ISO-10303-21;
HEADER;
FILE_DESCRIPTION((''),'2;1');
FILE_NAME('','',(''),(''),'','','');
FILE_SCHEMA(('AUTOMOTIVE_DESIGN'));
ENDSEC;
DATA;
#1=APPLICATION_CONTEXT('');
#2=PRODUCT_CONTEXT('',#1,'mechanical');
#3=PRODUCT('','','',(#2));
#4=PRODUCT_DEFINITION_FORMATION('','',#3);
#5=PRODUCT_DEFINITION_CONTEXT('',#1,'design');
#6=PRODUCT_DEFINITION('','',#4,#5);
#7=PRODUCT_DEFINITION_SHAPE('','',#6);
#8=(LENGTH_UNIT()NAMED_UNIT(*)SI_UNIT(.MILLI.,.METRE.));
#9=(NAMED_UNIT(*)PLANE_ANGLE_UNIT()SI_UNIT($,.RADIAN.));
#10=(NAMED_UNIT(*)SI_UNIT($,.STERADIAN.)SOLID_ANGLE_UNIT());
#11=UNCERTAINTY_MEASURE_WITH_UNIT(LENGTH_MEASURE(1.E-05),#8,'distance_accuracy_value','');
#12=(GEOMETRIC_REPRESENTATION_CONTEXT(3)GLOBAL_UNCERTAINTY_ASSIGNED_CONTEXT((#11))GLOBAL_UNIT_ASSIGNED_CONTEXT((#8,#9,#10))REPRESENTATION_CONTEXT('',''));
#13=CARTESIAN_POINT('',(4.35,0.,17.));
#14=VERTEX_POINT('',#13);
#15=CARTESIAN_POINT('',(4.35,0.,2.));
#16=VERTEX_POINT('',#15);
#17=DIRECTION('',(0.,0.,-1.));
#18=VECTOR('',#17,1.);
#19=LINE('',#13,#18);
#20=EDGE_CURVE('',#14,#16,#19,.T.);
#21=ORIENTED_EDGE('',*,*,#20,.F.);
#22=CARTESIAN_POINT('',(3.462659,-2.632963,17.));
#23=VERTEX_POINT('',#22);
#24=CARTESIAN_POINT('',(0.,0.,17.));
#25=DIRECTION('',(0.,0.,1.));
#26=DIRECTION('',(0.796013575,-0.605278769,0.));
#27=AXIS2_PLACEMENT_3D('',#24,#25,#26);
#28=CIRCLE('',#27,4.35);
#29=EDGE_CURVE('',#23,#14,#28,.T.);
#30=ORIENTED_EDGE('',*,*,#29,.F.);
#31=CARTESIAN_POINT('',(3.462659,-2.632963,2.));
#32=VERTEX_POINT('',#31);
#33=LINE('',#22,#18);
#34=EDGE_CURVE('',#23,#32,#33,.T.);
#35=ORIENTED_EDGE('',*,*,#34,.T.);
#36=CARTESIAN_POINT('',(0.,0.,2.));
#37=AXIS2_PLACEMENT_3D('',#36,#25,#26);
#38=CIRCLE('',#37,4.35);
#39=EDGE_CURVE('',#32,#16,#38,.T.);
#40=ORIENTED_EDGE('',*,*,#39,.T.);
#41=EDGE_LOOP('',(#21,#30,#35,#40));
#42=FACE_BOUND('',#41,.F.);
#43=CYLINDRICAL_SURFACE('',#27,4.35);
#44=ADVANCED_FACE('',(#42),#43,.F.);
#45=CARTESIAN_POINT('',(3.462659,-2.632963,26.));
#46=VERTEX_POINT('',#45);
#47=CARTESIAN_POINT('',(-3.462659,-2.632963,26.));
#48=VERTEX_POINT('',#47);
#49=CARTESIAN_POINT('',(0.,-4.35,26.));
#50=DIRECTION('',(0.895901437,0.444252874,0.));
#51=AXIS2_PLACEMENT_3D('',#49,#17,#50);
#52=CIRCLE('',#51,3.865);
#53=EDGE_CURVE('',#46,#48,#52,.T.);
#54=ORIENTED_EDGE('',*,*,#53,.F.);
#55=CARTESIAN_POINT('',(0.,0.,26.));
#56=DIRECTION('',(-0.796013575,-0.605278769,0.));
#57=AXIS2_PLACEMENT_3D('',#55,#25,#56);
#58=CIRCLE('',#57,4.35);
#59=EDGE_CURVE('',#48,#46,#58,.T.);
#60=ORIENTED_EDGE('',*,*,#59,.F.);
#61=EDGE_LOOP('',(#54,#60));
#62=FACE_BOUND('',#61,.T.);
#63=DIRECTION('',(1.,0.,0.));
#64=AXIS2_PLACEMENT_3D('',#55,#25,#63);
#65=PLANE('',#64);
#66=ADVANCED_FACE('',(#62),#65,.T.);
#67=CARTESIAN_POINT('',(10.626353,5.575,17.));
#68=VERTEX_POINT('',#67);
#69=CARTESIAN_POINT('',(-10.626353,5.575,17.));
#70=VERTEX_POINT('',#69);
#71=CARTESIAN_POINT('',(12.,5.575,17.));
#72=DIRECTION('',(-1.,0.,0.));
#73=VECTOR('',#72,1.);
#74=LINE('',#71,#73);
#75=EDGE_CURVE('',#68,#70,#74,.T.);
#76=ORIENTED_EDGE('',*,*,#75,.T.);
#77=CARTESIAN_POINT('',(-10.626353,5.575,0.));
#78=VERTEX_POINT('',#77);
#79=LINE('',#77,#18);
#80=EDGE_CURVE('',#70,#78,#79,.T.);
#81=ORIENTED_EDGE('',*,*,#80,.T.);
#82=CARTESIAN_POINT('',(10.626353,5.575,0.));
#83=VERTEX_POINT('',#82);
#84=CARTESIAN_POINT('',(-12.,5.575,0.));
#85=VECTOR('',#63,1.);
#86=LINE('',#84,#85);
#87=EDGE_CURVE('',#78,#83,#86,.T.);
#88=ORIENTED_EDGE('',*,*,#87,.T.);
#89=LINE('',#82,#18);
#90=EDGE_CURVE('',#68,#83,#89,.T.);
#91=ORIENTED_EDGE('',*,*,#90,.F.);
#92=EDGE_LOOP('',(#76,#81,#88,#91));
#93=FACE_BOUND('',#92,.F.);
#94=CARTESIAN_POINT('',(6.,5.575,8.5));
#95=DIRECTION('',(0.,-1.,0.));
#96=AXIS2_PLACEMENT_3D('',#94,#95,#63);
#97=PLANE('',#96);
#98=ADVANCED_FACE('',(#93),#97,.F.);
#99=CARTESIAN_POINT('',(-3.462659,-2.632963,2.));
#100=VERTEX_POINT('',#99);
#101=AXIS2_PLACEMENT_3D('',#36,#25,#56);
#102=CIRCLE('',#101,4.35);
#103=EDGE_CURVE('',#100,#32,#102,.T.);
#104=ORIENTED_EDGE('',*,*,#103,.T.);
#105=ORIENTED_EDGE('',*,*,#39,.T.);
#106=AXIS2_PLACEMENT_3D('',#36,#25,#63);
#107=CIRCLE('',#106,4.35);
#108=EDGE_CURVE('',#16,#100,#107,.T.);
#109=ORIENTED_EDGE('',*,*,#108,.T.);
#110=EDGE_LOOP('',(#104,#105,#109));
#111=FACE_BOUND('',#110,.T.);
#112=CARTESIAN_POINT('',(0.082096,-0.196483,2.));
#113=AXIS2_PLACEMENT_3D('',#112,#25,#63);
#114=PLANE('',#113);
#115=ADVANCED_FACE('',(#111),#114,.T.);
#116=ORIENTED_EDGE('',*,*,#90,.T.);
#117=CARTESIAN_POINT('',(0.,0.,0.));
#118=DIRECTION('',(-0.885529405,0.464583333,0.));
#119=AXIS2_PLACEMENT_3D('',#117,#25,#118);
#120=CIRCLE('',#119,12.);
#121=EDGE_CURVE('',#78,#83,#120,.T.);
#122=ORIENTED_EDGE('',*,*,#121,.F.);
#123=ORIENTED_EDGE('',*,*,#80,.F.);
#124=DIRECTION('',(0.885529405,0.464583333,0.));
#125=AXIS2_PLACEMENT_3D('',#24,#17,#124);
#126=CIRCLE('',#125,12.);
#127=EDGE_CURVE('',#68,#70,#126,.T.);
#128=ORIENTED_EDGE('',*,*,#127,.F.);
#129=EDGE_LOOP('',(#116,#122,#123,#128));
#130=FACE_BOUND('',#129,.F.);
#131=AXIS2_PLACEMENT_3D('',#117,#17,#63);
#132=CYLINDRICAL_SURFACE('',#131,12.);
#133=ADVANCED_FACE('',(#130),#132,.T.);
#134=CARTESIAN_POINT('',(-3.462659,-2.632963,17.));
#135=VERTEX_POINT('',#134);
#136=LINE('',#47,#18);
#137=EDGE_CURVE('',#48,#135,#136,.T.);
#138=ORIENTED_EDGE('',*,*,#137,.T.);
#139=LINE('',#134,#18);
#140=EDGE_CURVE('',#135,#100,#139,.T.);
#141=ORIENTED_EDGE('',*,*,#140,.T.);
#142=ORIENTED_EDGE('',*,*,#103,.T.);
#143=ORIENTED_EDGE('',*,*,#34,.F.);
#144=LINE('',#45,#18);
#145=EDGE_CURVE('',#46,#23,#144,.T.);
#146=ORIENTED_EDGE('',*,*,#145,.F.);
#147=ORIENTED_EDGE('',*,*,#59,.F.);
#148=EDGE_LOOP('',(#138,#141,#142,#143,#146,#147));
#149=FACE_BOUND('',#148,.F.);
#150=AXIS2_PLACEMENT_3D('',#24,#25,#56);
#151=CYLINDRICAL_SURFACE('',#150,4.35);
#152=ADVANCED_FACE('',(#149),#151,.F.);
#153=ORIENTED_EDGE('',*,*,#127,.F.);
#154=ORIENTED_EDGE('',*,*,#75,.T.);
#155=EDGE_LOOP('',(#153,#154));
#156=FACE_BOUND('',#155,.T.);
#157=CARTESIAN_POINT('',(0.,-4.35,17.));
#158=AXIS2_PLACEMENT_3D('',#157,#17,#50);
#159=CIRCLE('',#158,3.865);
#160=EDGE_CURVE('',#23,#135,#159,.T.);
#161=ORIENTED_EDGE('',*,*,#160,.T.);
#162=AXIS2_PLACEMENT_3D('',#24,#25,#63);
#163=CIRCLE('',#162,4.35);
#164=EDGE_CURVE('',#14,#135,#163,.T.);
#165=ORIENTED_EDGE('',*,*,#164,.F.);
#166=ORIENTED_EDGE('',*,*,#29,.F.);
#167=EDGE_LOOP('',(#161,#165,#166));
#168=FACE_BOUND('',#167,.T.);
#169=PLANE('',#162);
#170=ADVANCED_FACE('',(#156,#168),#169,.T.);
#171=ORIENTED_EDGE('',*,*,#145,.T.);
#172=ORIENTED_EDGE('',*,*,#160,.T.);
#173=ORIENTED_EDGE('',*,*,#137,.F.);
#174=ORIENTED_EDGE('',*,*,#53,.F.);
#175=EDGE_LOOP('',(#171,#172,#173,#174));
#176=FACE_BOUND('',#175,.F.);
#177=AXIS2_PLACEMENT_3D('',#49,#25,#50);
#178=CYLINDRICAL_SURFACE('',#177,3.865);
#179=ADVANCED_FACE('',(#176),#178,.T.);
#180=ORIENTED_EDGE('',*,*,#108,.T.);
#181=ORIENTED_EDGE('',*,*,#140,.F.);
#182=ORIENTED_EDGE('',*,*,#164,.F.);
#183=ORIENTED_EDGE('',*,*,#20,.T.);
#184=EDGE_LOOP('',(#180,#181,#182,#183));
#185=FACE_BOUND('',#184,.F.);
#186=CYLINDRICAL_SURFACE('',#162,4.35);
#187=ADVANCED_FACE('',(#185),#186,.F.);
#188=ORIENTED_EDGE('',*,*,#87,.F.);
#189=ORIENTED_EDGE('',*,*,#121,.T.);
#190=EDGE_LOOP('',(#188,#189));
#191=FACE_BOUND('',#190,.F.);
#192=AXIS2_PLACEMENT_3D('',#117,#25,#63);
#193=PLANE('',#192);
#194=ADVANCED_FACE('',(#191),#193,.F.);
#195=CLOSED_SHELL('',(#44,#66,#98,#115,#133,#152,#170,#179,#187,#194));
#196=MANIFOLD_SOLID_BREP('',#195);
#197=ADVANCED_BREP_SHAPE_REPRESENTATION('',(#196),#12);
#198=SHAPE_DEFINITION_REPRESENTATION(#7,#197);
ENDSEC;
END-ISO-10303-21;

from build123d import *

# Parameters (mm, degrees)
F0_R     = 12
F1_DEPTH = 26
F2_R     = 12
F3_DEPTH = 9
F5_DEPTH = 15
F7_W     = 12
F7_H     = 17
F8_DEPTH = 6.425


with BuildPart() as f1:
    # F0 (on Top) → F1 (new body)
    with BuildSketch(Plane.XY):
        Circle(F0_R)
    extrude(amount=F1_DEPTH)

    # F2 (on face) → F3 (cut)
    with BuildSketch(Plane.XY.offset(26)):
        Circle(F2_R)
        with BuildLine():
            ThreePointArc((-3.462659053, -2.6329626437), (-1.3892323635, 4.1222000728), (4.35, 0))
            ThreePointArc((4.35, 0), (4.1222000728, -1.3892323635), (3.462659053, -2.6329626437))
            ThreePointArc((3.462659053, -2.6329626437), (0, -8.215), (-3.462659053, -2.6329626437))
        make_face(mode=Mode.SUBTRACT)
        with BuildLine():
            ThreePointArc((3.462659053, -2.6329626437), (4.1222000728, -1.3892323635), (4.35, 0))
            ThreePointArc((4.35, 0), (-1.3892323635, 4.1222000728), (-3.462659053, -2.6329626437))
            ThreePointArc((-3.462659053, -2.6329626437), (0, -4.35), (3.462659053, -2.6329626437))
        make_face()
    extrude(amount=-F3_DEPTH, mode=Mode.SUBTRACT)

    # F4 (on face) → F5 (cut)
    with BuildSketch(Plane.XY.offset(17)):
        with BuildLine():
            ThreePointArc((3.462659053, -2.6329626437), (4.1222000728, -1.3892323635), (4.35, 0))
            ThreePointArc((4.35, 0), (-1.3892323635, 4.1222000728), (-3.462659053, -2.6329626437))
            ThreePointArc((-3.462659053, -2.6329626437), (0, -4.35), (3.462659053, -2.6329626437))
        make_face()
    extrude(amount=-F5_DEPTH, mode=Mode.SUBTRACT)

    # F7 (on offset) → F8 (cut)
    with BuildSketch(Plane.XZ.offset(-12)):
        with Locations((6, 8.5)):
            Rectangle(F7_W, F7_H)
        with Locations((-6, 8.5)):
            Rectangle(F7_W, F7_H)
    extrude(amount=F8_DEPTH, mode=Mode.SUBTRACT)


solid = f1.part
